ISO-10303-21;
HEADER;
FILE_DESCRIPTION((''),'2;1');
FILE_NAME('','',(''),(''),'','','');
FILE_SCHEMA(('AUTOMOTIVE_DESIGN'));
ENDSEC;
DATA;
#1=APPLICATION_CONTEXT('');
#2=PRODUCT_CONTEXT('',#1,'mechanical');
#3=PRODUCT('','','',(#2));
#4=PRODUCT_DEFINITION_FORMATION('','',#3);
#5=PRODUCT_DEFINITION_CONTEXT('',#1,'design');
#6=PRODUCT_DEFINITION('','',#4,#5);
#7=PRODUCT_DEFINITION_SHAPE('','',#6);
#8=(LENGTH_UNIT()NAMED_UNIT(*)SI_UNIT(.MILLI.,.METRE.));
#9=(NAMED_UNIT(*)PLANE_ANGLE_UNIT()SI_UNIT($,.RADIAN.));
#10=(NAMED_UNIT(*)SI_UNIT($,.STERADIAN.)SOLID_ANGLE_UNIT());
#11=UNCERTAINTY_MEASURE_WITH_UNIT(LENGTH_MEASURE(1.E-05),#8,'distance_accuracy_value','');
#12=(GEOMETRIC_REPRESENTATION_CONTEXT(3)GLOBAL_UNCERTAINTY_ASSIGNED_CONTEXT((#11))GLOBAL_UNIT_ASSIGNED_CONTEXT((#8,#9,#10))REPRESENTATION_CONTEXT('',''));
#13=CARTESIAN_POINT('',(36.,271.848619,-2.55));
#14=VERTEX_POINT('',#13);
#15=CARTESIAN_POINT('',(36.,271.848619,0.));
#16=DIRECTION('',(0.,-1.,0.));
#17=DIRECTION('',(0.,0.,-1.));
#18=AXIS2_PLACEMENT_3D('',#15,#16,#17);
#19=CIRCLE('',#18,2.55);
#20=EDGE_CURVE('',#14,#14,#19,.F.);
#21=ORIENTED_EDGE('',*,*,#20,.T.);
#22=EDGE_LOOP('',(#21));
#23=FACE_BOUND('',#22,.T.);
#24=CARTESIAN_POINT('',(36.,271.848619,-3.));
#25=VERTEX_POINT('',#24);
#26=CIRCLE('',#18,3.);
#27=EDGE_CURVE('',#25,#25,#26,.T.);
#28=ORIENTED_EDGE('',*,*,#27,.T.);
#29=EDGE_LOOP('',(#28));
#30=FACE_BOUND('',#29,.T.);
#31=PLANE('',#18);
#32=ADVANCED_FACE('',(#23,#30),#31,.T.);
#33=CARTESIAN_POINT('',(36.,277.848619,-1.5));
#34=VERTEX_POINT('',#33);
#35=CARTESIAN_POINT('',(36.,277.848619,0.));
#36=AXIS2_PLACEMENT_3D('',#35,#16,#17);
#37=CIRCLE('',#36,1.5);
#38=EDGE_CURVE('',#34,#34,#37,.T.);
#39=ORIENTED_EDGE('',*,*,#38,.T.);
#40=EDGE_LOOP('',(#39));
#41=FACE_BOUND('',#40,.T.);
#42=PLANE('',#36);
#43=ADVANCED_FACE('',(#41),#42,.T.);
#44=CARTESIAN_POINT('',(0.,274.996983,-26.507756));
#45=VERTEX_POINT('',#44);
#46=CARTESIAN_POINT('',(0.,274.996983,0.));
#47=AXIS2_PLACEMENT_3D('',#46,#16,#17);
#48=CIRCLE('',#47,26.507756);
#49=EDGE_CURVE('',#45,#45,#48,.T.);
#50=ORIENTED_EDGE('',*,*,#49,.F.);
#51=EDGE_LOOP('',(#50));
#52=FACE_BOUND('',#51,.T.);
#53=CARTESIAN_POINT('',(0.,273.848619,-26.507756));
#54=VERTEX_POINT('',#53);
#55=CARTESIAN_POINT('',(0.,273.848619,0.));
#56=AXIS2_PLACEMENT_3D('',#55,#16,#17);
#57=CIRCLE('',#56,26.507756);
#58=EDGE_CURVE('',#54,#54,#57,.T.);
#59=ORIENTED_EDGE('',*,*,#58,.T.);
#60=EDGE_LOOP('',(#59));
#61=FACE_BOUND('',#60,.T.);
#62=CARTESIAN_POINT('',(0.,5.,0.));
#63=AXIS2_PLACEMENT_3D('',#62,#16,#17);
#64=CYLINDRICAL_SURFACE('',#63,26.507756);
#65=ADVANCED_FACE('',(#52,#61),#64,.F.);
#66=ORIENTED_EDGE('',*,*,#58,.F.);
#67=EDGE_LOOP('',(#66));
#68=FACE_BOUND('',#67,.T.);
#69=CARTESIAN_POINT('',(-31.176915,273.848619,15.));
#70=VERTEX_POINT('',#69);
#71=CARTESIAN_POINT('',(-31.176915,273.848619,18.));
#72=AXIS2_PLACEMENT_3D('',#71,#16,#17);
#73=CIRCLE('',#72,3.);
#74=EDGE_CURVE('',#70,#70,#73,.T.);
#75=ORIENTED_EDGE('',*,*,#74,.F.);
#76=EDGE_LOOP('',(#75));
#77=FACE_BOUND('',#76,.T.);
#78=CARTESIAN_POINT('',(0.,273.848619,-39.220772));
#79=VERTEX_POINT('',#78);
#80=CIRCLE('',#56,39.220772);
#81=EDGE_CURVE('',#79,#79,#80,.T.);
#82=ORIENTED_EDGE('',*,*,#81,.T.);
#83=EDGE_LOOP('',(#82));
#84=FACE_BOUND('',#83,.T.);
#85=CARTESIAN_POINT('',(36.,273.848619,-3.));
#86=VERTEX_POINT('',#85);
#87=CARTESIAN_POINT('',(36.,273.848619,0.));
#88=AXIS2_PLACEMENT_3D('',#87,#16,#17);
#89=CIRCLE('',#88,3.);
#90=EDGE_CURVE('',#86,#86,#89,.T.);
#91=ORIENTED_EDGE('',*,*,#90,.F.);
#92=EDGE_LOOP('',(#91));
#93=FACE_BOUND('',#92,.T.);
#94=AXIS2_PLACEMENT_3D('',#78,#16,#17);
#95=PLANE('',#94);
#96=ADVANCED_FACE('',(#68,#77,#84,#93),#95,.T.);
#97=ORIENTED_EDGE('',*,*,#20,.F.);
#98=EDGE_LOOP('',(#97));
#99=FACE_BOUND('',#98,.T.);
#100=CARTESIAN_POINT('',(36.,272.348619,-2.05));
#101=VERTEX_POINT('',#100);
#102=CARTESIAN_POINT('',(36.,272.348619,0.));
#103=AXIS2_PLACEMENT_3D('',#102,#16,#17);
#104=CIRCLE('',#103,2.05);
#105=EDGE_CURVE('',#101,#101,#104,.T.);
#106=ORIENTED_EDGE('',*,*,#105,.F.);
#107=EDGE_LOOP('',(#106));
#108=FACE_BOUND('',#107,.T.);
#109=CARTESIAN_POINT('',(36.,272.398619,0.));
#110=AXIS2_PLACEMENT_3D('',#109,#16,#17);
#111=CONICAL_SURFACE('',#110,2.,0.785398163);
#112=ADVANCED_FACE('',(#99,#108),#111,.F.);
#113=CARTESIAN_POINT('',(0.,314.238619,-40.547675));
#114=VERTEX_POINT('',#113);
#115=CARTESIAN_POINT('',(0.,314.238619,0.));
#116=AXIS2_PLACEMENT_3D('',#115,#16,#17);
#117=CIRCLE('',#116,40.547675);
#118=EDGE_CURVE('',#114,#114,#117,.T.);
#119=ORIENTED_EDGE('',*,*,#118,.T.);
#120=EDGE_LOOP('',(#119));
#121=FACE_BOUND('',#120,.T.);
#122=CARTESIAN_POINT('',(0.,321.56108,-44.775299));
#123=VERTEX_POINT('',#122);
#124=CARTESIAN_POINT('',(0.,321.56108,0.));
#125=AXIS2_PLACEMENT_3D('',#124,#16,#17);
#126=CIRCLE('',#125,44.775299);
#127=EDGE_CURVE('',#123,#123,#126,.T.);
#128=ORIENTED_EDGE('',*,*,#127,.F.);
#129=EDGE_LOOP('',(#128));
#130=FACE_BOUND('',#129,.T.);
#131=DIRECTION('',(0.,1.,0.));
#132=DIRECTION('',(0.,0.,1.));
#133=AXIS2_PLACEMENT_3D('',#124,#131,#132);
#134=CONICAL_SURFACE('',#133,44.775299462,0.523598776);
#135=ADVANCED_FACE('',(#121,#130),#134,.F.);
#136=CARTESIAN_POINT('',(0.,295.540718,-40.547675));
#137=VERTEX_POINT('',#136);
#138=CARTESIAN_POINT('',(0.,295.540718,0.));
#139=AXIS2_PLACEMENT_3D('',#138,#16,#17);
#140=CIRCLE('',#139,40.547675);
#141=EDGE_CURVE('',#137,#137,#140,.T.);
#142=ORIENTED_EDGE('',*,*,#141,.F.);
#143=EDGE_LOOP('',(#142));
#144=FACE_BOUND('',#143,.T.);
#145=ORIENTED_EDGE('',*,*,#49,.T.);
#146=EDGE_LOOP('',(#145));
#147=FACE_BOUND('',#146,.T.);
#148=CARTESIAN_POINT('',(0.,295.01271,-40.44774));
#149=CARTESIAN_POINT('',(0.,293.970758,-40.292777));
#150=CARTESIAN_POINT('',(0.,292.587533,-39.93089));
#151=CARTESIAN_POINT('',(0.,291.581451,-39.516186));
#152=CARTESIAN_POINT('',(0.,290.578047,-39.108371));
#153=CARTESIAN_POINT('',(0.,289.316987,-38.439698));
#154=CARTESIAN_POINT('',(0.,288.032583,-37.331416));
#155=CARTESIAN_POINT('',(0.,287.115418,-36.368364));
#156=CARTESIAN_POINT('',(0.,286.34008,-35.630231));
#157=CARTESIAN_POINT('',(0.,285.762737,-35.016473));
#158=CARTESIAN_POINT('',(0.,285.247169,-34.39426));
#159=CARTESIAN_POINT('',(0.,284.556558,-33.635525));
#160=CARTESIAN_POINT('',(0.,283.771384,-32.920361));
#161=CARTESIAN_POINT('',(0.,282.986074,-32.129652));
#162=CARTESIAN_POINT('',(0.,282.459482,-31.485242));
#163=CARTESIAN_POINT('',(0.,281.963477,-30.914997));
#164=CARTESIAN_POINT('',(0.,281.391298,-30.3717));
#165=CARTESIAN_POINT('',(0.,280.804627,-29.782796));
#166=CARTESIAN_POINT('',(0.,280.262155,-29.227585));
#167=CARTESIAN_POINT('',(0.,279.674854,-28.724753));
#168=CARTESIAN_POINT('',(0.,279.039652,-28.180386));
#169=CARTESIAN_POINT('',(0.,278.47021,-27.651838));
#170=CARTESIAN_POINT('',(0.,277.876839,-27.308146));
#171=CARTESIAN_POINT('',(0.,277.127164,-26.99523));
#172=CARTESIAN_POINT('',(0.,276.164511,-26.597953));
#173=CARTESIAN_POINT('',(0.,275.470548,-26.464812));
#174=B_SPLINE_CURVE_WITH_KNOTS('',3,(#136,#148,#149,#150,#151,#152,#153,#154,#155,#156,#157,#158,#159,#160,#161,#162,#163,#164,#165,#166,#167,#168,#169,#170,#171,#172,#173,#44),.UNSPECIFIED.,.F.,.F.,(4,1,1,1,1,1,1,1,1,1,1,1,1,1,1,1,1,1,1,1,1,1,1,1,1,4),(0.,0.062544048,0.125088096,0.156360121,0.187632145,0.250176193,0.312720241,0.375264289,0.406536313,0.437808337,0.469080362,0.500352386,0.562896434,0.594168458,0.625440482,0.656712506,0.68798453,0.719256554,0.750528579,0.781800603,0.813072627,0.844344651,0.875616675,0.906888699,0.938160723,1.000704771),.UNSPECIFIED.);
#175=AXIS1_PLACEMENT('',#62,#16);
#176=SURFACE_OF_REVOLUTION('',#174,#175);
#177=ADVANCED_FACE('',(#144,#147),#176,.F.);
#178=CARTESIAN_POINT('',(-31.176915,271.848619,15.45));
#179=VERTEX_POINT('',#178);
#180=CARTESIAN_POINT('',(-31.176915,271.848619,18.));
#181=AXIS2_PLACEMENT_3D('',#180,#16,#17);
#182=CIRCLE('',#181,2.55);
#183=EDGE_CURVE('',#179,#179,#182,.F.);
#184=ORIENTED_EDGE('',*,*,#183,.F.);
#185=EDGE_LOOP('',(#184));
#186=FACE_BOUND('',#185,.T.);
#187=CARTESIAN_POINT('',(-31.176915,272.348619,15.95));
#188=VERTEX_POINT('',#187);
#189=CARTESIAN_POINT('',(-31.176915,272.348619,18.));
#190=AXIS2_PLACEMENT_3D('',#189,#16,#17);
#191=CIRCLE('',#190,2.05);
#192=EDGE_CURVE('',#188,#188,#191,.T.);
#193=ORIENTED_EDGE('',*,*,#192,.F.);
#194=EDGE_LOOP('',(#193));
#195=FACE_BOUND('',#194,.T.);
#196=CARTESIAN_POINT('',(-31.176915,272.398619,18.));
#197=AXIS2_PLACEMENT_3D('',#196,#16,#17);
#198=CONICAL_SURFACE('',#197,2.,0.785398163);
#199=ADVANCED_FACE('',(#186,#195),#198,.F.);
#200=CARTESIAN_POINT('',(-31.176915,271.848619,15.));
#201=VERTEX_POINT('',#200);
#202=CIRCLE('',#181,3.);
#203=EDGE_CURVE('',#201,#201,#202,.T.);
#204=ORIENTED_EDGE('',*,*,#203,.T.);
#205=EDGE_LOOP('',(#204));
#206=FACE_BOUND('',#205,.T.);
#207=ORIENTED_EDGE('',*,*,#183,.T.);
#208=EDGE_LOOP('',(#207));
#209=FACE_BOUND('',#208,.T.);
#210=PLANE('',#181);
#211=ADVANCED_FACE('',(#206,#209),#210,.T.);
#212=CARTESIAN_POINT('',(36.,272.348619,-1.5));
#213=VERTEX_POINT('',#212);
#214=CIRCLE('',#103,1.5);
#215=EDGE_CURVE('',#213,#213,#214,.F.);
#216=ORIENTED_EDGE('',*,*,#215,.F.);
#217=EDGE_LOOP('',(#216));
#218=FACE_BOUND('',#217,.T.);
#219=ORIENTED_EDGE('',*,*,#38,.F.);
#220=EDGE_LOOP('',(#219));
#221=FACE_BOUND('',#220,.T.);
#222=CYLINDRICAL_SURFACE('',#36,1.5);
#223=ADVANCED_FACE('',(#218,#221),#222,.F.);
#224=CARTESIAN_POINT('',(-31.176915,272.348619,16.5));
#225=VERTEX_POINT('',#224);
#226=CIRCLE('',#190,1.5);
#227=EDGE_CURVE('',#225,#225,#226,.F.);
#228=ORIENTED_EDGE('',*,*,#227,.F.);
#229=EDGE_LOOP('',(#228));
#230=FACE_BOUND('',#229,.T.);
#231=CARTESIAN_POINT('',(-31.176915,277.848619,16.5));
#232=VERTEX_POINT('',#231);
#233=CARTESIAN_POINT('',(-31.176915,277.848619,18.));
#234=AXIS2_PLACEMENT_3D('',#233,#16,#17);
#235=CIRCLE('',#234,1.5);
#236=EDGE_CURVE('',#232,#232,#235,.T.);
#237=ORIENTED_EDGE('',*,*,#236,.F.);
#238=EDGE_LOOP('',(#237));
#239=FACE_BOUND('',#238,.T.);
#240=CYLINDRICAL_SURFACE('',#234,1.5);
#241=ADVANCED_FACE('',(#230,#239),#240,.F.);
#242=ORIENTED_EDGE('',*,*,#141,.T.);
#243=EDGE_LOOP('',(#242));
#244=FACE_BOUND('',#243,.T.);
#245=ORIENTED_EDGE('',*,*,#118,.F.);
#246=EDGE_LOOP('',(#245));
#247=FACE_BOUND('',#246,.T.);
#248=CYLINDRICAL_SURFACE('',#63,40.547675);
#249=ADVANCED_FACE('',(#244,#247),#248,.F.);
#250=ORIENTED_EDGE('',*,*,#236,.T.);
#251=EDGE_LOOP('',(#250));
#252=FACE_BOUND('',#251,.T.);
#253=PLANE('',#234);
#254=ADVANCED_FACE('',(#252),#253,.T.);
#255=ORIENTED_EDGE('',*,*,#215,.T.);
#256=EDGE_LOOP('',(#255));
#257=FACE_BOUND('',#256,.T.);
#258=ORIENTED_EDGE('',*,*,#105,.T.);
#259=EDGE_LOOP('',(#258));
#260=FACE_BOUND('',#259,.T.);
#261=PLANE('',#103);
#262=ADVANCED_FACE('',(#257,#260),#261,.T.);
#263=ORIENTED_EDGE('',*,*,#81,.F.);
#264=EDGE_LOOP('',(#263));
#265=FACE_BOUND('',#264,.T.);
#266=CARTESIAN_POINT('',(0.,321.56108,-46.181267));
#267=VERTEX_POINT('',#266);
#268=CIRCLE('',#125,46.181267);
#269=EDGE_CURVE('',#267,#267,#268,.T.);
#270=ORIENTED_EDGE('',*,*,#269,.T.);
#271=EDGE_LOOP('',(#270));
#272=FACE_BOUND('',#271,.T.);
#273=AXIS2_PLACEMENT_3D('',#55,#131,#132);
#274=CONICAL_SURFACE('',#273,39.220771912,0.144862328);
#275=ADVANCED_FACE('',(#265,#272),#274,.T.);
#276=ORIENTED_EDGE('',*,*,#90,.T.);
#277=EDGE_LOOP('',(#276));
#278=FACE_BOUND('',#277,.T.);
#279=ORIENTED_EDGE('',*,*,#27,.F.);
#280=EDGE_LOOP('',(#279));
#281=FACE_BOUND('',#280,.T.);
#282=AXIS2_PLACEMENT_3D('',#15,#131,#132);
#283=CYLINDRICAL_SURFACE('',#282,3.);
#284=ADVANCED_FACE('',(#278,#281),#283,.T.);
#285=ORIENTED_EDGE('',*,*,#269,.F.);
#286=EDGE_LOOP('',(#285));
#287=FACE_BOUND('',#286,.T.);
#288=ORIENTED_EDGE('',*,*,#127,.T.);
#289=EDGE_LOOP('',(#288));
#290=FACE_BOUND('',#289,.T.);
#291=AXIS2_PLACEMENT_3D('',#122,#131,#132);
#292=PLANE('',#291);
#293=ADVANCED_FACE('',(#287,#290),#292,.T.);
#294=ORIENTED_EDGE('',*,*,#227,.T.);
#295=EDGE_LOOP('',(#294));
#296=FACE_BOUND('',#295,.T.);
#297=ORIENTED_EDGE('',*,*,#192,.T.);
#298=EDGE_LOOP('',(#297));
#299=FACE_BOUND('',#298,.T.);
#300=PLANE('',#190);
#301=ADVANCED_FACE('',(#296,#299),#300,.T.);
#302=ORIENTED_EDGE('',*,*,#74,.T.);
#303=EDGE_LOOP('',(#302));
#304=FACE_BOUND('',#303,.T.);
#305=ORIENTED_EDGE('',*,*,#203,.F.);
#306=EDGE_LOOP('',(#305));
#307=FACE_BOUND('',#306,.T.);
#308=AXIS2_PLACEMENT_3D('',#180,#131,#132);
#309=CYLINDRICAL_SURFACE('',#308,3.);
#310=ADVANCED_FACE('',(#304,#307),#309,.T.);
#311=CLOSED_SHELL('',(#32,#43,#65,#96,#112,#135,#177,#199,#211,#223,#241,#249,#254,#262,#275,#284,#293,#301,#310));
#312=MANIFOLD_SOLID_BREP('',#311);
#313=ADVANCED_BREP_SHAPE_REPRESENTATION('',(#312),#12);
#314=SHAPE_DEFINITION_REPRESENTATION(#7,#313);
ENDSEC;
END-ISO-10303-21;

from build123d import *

# Parameters (mm, degrees)
SKETCH4_R           = 3
BOSS_EXTRUDE1_DEPTH = 2
SKETCH9_R           = 1.5
CUT_EXTRUDE1_DEPTH  = 6
SKETCH10_R          = 2
CUT_EXTRUDE2_DEPTH  = 0.5


with BuildPart() as part:
    # Sketch2 → Revolve6 (revolve)
    with BuildSketch(Plane(origin=(0, 0, 0), x_dir=(0, 0, -1), z_dir=(1, 0, 0))):
        with BuildLine():
            Line((26.5077562, 274.996982717), (26.5077562, 273.848618937))
            Line((26.5077562, 273.848618937), (39.220771912, 273.848618937))
            Line((39.220771912, 273.848618937), (46.181267187, 321.561079724))
            Line((46.181267187, 321.561079724), (44.775299462, 321.561079724))
            Line((44.775299462, 321.561079724), (40.547674755, 314.238618937))
            Line((40.547674755, 314.238618937), (40.547674755, 295.540718438))
            add(Edge.make_bspline(
                [(40.547674755, 295.540718438), (40.447740466, 295.012709616), (40.292777353, 293.970757619), (39.930889755, 292.587532753), (39.516186416, 291.581451359), (39.108370782, 290.57804728), (38.439698054, 289.316986818), (37.331416086, 288.032583079), (36.368363881, 287.115418474), (35.630231264, 286.340079673), (35.016472726, 285.762737126), (34.394259795, 285.247169223), (33.635524662, 284.556557999), (32.920361334, 283.771384038), (32.129651901, 282.986073936), (31.485241784, 282.459482323), (30.914997208, 281.963476573), (30.371700346, 281.391298159), (29.782796159, 280.80462685), (29.227584581, 280.262154528), (28.724752618, 279.674853681), (28.180386253, 279.039651715), (27.651838315, 278.470209992), (27.308145935, 277.876839187), (26.995230081, 277.127164256), (26.597952618, 276.164510632), (26.464811583, 275.470548141), (26.5077562, 274.996982717)],
                knots=[0, 0, 0, 0, 0.062544048, 0.125088096, 0.156360121, 0.187632145, 0.250176193, 0.312720241, 0.375264289, 0.406536313, 0.437808337, 0.469080362, 0.500352386, 0.562896434, 0.594168458, 0.625440482, 0.656712506, 0.68798453, 0.719256554, 0.750528579, 0.781800603, 0.813072627, 0.844344651, 0.875616675, 0.906888699, 0.938160723, 1.000704771, 1.000704771, 1.000704771, 1.000704771], degree=3))
        make_face()
    revolve(axis=Axis((0, 5, 0), (0, 1, 0)))

    # Sketch4 → Boss-Extrude1 (add)
    with BuildSketch(Plane.XZ.offset(-273.848618937)):
        with Locations(Location((-31.176914536, 18, 0), (0, 0, 270))):
            Circle(SKETCH4_R)
        with Locations(Location((36, 0, 0), (0, 0, 270))):
            Circle(SKETCH4_R)
    extrude(amount=BOSS_EXTRUDE1_DEPTH)

    # Sketch9 → Cut-Extrude1 (cut)
    with BuildSketch(Plane.XZ.offset(-271.848618937)):
        with Locations(Location((36, 0, 0), (0, 0, 270))):
            Circle(SKETCH9_R)
        with Locations(Location((-31.176914536, 18, 0), (0, 0, 270))):
            Circle(SKETCH9_R)
    extrude(amount=-CUT_EXTRUDE1_DEPTH, mode=Mode.SUBTRACT)

    # Sketch10 → Cut-Extrude2 (cut)
    with BuildSketch(Plane.XZ.offset(-271.848618937)):
        with Locations(Location((36, 0, 0), (0, 0, 270))):
            Circle(SKETCH10_R)
        with Locations(Location((-31.176914536, 18, 0), (0, 0, 270))):
            Circle(SKETCH10_R)
    extrude(amount=-CUT_EXTRUDE2_DEPTH, mode=Mode.SUBTRACT)

    # Chamfer3: read off the stored shape, not the designer's step
    # Chamfer3: loft between two sections, ruled curve by curve
    chamfer3_from = [
        Edge.make_three_point_arc((-31.176914536, 272.348618937, 15.95), (-29.126914536, 272.348618937, 18), (-31.176914536, 272.348618937, 20.05)),
        Edge.make_three_point_arc((-31.176914536, 272.348618937, 20.05), (-33.226914536, 272.348618937, 18), (-31.176914536, 272.348618937, 15.95)),
    ]
    chamfer3_to = [
        Edge.make_three_point_arc((-31.176914536, 271.848618937, 15.45), (-28.626914536, 271.848618937, 18), (-31.176914536, 271.848618937, 20.55)),
        Edge.make_three_point_arc((-31.176914536, 271.848618937, 20.55), (-33.726914536, 271.848618937, 18), (-31.176914536, 271.848618937, 15.45)),
    ]
    chamfer3 = Solid(Shell([*[Face.make_surface_from_curves(chamfer3_from[k], chamfer3_to[k]) for k in range(2)], Face(Wire(chamfer3_from)), Face(Wire(chamfer3_to))]))
    add(chamfer3, mode=Mode.SUBTRACT)

    # Chamfer3 2: loft between two sections, ruled curve by curve
    chamfer3_2_from = [
        Edge.make_three_point_arc((36, 272.348618937, -2.05), (38.05, 272.348618937, 0), (36, 272.348618937, 2.05)),
        Edge.make_three_point_arc((36, 272.348618937, 2.05), (33.95, 272.348618937, 0), (36, 272.348618937, -2.05)),
    ]
    chamfer3_2_to = [
        Edge.make_three_point_arc((36, 271.848618937, -2.55), (38.55, 271.848618937, 0), (36, 271.848618937, 2.55)),
        Edge.make_three_point_arc((36, 271.848618937, 2.55), (33.45, 271.848618937, 0), (36, 271.848618937, -2.55)),
    ]
    chamfer3_2 = Solid(Shell([*[Face.make_surface_from_curves(chamfer3_2_from[k], chamfer3_2_to[k]) for k in range(2)], Face(Wire(chamfer3_2_from)), Face(Wire(chamfer3_2_to))]))
    add(chamfer3_2, mode=Mode.SUBTRACT)


solid = part.part
